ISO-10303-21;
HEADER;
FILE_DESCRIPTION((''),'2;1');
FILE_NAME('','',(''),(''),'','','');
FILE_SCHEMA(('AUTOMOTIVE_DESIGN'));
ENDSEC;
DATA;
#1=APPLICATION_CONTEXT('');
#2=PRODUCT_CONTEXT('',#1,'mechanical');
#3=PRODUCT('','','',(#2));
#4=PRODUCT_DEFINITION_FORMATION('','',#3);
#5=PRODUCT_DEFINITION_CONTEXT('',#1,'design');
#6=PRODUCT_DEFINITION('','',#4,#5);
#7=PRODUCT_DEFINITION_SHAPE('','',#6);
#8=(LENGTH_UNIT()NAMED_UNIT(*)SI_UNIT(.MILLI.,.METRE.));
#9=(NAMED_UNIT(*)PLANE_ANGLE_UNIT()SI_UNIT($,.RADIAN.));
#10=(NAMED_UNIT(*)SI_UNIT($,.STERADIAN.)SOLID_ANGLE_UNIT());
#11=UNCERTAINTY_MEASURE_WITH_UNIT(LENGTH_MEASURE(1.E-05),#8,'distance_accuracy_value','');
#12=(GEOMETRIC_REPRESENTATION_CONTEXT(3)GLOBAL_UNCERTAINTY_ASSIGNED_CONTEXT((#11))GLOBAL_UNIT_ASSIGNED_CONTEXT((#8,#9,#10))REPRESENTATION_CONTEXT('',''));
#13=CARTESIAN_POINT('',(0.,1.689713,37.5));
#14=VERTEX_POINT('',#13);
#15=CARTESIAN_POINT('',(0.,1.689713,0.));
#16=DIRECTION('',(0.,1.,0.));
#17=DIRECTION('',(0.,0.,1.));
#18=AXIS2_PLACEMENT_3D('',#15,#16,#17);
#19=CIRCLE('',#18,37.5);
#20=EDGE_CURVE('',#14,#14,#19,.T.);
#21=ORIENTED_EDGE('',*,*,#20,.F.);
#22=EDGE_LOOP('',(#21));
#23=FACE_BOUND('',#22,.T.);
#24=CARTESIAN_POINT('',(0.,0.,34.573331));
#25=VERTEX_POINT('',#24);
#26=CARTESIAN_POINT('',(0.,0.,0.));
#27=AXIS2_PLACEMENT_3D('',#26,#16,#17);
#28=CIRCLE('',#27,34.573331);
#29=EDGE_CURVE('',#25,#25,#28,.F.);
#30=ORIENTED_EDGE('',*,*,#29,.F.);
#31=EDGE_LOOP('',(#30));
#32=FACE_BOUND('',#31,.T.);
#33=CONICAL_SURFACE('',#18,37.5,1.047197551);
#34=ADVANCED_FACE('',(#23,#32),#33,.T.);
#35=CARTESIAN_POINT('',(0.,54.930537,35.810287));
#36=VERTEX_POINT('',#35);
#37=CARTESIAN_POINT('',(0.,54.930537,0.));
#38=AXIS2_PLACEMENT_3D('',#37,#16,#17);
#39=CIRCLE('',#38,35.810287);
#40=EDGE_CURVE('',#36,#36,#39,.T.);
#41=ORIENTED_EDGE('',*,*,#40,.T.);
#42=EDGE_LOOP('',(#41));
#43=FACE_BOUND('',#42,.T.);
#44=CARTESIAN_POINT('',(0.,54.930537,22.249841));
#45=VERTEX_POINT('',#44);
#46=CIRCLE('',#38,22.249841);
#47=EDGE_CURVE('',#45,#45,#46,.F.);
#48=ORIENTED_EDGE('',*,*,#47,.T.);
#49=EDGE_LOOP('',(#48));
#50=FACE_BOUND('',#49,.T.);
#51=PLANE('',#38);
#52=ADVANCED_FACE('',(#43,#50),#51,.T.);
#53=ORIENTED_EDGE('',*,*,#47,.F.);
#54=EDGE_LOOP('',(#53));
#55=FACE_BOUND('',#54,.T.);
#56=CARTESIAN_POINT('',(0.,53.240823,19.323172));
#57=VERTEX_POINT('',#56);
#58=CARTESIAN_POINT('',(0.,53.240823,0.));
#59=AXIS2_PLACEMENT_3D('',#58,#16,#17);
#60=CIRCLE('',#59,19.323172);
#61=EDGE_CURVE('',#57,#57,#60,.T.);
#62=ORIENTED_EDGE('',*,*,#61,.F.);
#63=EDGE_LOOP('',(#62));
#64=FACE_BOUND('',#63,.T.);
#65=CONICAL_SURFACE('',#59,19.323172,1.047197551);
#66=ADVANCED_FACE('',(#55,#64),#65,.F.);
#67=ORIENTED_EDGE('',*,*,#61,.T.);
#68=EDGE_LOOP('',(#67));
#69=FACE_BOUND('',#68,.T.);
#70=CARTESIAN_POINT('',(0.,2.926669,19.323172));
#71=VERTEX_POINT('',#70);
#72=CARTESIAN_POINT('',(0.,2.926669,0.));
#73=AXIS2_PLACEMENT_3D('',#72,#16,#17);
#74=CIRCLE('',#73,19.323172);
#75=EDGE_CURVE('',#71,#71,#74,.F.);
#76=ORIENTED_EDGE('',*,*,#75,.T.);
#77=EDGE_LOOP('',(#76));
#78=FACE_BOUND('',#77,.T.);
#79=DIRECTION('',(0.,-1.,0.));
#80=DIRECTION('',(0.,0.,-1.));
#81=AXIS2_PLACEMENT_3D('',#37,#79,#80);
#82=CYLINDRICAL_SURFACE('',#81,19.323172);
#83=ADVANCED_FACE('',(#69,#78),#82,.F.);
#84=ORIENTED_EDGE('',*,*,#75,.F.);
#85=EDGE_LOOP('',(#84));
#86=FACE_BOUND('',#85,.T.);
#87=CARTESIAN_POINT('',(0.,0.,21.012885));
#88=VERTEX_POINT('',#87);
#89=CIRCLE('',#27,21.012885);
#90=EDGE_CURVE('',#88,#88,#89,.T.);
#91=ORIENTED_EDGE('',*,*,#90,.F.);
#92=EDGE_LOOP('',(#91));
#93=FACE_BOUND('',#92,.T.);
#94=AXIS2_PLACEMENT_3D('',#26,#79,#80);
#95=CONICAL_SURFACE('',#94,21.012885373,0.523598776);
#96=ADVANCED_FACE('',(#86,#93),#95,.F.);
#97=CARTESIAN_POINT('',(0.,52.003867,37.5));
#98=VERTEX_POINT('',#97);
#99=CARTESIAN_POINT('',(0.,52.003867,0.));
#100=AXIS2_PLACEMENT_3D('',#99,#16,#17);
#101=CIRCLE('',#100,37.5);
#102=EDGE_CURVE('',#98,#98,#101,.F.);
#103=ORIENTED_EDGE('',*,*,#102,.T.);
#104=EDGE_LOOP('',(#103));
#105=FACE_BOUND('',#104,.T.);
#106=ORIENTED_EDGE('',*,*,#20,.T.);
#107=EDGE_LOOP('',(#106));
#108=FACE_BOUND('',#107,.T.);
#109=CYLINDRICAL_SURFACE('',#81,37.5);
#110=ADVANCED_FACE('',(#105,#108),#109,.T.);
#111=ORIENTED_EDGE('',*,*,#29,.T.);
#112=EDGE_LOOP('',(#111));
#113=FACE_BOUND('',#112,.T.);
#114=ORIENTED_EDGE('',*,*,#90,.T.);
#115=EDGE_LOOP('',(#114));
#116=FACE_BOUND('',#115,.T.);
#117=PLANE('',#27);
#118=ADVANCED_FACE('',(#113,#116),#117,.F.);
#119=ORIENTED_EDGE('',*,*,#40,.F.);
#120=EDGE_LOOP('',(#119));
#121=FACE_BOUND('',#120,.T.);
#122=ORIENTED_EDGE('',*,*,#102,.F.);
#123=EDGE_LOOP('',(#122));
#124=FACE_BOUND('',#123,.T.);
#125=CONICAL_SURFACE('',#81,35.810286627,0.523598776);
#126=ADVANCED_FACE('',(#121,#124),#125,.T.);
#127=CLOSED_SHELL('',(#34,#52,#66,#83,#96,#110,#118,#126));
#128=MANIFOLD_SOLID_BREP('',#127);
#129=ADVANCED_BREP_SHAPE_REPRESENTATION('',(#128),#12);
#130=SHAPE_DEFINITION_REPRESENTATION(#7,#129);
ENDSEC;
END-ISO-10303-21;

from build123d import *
from OCP.BRepFilletAPI import BRepFilletAPI_MakeChamfer

# Parameters (mm, degrees)
SKETCH1_R           = 37.5
BOSS_EXTRUDE1_DEPTH = 54.930536533
SKETCH2_R           = 19.323172
CUT_EXTRUDE1_DEPTH  = 77.353545064
CHAMFER1_SIZE       = 2.926669412
CHAMFER1_SIZE2      = 1.689713373


with BuildPart() as part:
    # Sketch1 → Boss-Extrude1 (new body)
    with BuildSketch(Plane(origin=(0, 0, 0), x_dir=(1, 0, 0), z_dir=(0, 1, 0))):
        Circle(SKETCH1_R)
    extrude(amount=BOSS_EXTRUDE1_DEPTH)

    # Sketch2 → Cut-Extrude1 (cut, through all)
    with BuildSketch(Plane(origin=(0, 0, 0), x_dir=(1, 0, 0), z_dir=(0, 1, 0))):
        Circle(SKETCH2_R)
    extrude(amount=CUT_EXTRUDE1_DEPTH, mode=Mode.SUBTRACT)

    # Chamfer1: one chamfer whose edges measure the first distance from different faces: ONE call of the kernel's chamfer builder (chamfer() names one face for all edges)
    chamfer1_edges_1 = [part.edges().sort_by_distance(p)[0] for p in [
        (-19.323172, 54.930536533, 0),
    ]]
    chamfer1_side_1 = [part.faces().sort_by_distance(p)[0] for p in [
        (-36.439339828, 54.930536533, 0),
    ]]
    chamfer1_edges_2 = [part.edges().sort_by_distance(p)[0] for p in [
        (-19.323172, 0, 0),
    ]]
    chamfer1_side_2 = [part.faces().sort_by_distance(p)[0] for p in [
        (-19.323172, 27.465268267, 0),
    ]]
    chamfer1_edges_3 = [part.edges().sort_by_distance(p)[0] for p in [
        (-37.5, 0, 0),
    ]]
    chamfer1_side_3 = [part.faces().sort_by_distance(p)[0] for p in [
        (-36.439339828, 0, 0),
    ]]
    chamfer1_edges_4 = [part.edges().sort_by_distance(p)[0] for p in [
        (-37.5, 54.930536533, 0),
    ]]
    chamfer1_side_4 = [part.faces().sort_by_distance(p)[0] for p in [
        (-37.5, 27.465268267, 0),
    ]]
    chamfer1 = BRepFilletAPI_MakeChamfer(part.part.solid().wrapped)
    for e in chamfer1_edges_1:
        chamfer1.Add(CHAMFER1_SIZE, CHAMFER1_SIZE2, e.wrapped, chamfer1_side_1[0].wrapped)  # the first distance lies on this face
    for e in chamfer1_edges_2:
        chamfer1.Add(CHAMFER1_SIZE, CHAMFER1_SIZE2, e.wrapped, chamfer1_side_2[0].wrapped)  # the first distance lies on this face
    for e in chamfer1_edges_3:
        chamfer1.Add(CHAMFER1_SIZE, CHAMFER1_SIZE2, e.wrapped, chamfer1_side_3[0].wrapped)  # the first distance lies on this face
    for e in chamfer1_edges_4:
        chamfer1.Add(CHAMFER1_SIZE, CHAMFER1_SIZE2, e.wrapped, chamfer1_side_4[0].wrapped)  # the first distance lies on this face
    add(Compound.cast(chamfer1.Shape()), mode=Mode.REPLACE)


solid = part.part
